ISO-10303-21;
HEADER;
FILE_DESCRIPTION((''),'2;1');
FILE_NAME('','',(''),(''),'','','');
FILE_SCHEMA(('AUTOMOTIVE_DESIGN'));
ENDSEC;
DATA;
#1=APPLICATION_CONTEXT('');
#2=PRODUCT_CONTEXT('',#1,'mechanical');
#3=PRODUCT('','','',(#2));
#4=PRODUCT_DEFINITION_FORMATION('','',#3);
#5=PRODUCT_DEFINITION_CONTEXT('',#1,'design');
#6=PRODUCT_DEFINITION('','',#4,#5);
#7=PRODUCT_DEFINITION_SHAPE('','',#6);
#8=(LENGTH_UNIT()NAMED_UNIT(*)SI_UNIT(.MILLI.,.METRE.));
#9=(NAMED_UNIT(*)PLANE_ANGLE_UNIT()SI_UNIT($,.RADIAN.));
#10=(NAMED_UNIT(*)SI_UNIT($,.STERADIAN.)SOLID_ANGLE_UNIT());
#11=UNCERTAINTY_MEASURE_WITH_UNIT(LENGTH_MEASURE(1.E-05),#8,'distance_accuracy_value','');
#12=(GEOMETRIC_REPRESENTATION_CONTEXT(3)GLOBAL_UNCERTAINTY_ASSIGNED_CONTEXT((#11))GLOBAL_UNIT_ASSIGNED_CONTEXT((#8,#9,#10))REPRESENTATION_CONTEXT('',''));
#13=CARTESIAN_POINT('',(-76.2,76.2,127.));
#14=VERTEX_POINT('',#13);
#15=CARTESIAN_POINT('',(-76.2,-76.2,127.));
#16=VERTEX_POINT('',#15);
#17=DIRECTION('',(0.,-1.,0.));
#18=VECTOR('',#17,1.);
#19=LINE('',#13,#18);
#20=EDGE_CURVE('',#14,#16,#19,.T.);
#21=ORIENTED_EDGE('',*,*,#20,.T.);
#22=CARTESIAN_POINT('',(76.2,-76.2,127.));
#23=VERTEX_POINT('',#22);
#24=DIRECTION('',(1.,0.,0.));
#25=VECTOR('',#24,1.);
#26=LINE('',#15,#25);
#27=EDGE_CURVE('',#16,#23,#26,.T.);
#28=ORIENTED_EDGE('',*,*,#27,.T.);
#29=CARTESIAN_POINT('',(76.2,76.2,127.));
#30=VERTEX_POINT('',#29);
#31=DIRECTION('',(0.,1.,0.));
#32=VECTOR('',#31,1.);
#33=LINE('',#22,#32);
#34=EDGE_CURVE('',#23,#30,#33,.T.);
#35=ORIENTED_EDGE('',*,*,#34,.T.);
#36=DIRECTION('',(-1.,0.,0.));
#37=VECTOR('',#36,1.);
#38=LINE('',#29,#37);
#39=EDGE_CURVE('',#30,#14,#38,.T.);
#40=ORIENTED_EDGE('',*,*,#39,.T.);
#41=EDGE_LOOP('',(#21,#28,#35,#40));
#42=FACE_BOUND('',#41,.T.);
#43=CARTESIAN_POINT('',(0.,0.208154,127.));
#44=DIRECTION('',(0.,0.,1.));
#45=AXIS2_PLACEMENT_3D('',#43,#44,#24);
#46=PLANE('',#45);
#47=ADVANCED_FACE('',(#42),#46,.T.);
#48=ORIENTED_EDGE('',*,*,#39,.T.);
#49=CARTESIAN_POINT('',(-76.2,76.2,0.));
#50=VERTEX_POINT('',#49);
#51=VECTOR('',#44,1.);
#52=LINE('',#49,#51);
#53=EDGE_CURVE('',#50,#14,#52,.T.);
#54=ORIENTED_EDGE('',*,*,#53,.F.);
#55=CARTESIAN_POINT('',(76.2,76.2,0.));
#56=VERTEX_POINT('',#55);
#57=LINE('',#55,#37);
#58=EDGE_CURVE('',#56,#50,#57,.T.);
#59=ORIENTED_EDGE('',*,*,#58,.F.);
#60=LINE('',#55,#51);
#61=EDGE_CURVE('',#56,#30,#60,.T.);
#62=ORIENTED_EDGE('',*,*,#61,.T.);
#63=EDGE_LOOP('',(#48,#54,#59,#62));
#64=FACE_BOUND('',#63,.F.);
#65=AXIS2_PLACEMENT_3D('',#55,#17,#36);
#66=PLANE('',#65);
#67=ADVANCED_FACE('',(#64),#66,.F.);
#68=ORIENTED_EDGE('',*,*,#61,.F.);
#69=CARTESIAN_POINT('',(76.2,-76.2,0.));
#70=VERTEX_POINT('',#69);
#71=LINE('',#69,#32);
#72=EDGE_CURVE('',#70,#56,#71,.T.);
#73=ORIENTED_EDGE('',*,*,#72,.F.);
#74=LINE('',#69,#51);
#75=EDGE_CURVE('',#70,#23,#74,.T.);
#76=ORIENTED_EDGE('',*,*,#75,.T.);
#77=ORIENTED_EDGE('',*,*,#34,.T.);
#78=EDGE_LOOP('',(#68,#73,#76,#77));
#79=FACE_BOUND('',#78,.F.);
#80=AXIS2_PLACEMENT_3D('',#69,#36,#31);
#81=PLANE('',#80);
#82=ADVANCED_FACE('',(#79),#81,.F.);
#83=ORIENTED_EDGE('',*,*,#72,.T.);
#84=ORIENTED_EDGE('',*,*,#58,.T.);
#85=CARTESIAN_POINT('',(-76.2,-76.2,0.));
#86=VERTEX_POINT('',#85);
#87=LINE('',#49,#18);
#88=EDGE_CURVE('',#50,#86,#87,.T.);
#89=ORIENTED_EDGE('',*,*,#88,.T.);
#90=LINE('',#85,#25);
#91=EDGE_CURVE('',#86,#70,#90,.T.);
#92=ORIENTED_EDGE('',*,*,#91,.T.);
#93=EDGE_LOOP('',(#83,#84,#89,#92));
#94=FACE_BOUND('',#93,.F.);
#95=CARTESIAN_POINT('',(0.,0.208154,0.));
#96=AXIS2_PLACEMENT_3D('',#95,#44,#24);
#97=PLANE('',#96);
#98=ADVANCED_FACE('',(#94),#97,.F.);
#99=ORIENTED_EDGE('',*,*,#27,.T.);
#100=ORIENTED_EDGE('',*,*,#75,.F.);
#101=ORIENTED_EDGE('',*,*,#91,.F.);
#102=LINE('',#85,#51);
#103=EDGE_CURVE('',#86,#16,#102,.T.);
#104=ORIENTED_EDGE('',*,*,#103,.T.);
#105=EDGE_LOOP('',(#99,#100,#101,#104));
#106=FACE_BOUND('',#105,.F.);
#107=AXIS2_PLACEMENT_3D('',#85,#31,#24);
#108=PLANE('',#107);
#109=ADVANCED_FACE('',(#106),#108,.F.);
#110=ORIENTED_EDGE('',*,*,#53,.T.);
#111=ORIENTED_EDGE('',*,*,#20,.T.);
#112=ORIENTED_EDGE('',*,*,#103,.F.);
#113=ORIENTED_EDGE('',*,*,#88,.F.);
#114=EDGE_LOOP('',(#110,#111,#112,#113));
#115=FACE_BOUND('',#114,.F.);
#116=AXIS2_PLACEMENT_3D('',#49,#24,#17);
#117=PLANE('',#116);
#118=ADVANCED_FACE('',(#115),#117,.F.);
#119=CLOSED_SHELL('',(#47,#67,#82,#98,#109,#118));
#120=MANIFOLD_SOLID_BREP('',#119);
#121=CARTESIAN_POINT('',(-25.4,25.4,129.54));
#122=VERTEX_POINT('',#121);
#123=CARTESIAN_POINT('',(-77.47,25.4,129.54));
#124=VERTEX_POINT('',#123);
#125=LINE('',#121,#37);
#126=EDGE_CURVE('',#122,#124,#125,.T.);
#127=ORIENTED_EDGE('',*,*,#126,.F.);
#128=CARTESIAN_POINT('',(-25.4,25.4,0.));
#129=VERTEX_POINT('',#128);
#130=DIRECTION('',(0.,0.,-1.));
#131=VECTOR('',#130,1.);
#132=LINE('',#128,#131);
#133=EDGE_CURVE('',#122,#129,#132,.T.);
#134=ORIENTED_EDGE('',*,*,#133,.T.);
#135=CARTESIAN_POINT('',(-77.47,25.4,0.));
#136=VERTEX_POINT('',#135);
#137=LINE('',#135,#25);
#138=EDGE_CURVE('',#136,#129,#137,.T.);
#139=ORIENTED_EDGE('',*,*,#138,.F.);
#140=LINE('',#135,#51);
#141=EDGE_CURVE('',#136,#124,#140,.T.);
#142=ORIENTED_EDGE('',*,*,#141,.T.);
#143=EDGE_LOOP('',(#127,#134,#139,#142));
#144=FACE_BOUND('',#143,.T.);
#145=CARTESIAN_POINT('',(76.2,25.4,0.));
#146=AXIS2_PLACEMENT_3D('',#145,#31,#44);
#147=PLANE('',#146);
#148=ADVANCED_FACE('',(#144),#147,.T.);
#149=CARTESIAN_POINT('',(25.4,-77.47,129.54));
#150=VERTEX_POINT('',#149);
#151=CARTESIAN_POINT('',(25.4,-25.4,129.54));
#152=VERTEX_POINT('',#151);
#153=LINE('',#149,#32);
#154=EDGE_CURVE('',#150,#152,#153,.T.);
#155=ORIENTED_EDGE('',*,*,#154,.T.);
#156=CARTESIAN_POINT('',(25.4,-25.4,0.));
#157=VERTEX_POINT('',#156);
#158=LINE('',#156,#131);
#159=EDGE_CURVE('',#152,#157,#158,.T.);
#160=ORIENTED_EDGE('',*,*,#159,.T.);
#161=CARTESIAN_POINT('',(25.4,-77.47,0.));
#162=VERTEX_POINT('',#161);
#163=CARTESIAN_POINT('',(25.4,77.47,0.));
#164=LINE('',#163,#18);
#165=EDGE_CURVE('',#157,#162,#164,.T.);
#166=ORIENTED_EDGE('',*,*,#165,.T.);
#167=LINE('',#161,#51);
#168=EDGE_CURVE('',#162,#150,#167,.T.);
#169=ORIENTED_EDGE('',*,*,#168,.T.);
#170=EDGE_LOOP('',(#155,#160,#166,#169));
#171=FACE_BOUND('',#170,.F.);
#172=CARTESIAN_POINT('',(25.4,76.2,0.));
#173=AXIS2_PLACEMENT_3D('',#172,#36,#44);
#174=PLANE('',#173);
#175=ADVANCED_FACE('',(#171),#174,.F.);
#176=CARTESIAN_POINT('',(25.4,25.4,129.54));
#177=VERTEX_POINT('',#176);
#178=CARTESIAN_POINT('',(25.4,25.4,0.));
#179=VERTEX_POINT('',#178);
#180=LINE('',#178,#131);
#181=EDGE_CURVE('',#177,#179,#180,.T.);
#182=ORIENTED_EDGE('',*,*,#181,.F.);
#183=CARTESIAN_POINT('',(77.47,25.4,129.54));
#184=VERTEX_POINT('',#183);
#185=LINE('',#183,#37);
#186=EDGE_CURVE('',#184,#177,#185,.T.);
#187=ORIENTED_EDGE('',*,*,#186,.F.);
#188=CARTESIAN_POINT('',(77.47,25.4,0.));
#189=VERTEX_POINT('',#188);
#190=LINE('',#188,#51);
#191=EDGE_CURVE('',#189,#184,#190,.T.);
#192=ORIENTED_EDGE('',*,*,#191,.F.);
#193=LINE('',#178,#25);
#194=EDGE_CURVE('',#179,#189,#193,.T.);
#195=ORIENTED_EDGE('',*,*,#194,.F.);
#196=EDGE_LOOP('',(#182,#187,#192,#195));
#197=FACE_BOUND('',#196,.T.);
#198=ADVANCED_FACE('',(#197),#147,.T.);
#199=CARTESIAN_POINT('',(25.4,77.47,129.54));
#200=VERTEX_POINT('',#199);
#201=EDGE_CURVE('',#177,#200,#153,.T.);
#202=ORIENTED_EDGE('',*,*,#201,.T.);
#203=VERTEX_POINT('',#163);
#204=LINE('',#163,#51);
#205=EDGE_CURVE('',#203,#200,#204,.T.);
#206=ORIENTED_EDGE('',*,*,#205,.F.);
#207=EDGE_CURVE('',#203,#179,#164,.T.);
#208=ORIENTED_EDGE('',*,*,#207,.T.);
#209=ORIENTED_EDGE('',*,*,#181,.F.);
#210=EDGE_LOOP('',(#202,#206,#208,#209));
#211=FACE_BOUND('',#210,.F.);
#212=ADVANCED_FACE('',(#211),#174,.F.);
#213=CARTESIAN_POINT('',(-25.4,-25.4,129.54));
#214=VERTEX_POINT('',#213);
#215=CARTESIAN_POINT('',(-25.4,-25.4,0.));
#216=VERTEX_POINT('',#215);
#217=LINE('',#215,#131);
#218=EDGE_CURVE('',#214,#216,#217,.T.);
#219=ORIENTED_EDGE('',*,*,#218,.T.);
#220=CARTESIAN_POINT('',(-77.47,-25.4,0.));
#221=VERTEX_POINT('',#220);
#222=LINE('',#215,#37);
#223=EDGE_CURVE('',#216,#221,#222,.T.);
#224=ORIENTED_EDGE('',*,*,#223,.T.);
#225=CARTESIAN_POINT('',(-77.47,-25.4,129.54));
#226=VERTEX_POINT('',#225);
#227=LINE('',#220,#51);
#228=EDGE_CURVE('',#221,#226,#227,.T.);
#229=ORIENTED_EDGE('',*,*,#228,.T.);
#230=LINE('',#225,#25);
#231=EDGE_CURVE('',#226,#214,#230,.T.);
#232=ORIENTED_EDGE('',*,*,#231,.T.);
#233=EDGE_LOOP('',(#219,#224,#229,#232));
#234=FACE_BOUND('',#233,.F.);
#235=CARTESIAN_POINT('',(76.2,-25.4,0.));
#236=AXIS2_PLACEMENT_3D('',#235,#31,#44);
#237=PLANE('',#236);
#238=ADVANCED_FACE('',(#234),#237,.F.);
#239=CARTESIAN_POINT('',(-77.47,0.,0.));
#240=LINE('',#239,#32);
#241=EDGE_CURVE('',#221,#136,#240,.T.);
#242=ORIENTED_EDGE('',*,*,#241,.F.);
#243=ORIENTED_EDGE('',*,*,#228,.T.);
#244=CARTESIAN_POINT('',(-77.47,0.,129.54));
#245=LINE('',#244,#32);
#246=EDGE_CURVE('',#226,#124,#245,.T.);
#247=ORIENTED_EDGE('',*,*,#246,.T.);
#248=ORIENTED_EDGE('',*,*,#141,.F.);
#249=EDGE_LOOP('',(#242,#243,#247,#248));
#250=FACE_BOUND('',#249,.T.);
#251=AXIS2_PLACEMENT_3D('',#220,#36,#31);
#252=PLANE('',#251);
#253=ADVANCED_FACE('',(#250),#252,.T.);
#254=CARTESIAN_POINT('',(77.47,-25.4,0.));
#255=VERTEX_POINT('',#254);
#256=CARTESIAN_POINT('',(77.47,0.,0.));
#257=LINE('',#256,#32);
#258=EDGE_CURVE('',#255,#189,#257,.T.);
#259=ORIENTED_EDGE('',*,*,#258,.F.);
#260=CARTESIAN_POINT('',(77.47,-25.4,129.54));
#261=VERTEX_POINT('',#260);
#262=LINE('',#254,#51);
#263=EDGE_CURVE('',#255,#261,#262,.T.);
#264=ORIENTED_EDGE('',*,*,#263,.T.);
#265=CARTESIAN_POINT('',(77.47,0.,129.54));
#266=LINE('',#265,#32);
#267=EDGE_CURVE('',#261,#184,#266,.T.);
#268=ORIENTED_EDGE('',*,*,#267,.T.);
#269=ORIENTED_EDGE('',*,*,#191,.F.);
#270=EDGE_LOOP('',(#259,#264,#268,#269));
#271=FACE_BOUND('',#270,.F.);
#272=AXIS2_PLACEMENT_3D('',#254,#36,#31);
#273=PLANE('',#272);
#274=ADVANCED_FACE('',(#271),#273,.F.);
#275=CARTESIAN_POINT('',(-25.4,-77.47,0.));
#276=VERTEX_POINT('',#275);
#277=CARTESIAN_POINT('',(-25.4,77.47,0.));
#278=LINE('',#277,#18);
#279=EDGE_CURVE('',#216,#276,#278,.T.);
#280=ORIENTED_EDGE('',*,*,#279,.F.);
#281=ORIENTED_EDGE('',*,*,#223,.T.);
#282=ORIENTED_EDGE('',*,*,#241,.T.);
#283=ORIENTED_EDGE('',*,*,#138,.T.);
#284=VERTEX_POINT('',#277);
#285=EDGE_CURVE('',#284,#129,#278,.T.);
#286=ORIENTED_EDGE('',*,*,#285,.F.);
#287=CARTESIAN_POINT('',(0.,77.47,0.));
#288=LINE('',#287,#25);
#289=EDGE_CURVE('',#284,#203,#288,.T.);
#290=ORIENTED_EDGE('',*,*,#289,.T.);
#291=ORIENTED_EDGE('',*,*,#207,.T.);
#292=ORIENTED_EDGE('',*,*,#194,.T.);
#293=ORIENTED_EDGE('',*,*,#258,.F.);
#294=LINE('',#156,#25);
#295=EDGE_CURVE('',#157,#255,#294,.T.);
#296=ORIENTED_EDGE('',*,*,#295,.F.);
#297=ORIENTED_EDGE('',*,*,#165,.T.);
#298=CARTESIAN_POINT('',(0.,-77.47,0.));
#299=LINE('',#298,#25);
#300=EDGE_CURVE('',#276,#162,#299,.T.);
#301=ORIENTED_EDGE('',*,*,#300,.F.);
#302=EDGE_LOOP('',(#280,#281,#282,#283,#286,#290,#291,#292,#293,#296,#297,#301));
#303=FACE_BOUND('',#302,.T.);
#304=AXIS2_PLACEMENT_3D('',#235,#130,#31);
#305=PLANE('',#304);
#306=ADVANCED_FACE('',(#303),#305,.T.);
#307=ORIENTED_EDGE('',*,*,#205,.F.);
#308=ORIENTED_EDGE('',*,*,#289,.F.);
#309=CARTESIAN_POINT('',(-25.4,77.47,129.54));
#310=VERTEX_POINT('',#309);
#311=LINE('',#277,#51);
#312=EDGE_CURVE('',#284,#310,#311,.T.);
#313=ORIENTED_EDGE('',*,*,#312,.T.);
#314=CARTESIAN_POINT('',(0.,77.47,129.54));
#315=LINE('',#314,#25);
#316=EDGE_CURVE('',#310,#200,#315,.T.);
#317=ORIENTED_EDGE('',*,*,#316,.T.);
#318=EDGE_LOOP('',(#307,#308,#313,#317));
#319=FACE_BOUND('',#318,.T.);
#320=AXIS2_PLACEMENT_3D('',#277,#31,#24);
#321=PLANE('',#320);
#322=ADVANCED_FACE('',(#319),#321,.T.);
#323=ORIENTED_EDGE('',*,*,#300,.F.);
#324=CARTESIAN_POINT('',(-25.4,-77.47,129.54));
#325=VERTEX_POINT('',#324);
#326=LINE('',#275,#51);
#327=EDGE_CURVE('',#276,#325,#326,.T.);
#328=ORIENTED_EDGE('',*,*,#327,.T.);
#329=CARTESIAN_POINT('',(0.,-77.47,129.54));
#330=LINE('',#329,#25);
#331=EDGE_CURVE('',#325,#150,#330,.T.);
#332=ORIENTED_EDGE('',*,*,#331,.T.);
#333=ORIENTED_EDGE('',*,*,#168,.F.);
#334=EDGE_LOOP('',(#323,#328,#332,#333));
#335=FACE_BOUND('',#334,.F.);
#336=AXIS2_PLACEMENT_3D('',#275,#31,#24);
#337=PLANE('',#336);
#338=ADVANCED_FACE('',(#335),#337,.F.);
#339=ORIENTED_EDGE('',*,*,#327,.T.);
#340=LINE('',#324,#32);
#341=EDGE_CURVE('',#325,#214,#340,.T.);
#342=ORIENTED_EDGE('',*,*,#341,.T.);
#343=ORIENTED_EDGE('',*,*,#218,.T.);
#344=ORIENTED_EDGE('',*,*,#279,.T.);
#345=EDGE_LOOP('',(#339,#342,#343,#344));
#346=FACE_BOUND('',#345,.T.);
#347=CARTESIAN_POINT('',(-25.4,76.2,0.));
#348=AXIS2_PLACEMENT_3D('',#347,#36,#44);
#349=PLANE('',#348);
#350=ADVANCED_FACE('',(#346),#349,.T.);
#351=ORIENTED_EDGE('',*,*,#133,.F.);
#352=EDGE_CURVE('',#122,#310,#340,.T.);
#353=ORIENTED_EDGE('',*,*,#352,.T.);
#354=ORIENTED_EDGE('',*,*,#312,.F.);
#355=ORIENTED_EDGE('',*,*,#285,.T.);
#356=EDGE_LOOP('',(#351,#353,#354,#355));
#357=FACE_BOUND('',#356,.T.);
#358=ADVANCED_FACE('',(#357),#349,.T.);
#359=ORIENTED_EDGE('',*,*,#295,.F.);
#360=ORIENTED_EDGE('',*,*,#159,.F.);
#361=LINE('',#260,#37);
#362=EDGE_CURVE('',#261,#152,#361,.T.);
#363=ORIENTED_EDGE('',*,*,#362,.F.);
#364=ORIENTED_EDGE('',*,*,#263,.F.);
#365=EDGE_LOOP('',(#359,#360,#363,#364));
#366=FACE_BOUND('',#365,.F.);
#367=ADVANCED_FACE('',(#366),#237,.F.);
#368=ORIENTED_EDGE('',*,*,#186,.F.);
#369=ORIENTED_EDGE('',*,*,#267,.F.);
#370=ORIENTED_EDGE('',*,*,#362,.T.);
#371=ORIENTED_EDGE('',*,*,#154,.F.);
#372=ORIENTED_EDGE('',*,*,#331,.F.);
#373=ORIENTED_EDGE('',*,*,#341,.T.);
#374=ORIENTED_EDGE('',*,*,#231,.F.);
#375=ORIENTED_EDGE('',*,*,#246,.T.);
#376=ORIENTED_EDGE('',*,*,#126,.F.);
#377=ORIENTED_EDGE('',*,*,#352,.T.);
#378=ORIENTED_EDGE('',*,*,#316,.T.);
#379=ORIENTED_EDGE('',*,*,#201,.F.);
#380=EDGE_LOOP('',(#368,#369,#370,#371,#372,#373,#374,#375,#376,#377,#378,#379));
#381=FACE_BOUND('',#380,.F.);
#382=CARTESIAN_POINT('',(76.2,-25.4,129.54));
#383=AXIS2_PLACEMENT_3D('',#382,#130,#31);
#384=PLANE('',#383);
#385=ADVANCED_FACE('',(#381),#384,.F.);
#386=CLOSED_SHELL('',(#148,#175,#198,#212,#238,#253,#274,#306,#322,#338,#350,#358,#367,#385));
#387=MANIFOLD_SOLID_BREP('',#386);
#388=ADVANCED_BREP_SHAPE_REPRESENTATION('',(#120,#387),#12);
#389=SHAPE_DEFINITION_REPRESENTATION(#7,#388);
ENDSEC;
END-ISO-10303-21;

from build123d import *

# Parameters (mm, degrees)
F0_W     = 50.8
F0_H     = 1.27
F1_DEPTH = 127
F0_W_2   = 1.27
F0_H_2   = 50.8
F2_DEPTH = 129.54
F3_DEPTH = 152.4
F4_DEPTH = 152.4


with BuildPart() as f1:
    # F0 (on Top) → F1 (new body)
    with BuildSketch(Plane.XY):
        Polygon((-25.4, 76.2), (-76.2, 76.2), (-76.2, 25.4), (-76.2, -25.4), (-76.2, -76.2), (-25.4, -76.2), (25.4, -76.2), (76.2, -76.2), (76.2, -25.4), (76.2, 25.4), (76.2, 76.2), (25.4, 76.2), (25.4, 74.93), (-25.4, 74.93), align=None)
        with Locations((0, 75.565)):
            Rectangle(F0_W, F0_H)
    extrude(amount=F1_DEPTH)


with BuildPart() as f2:
    # F0 (on Top) → F2 (new body)
    with BuildSketch(Plane.XY):
        with Locations((76.835, 0)):
            Rectangle(F0_W_2, F0_H_2)
    extrude(amount=F2_DEPTH)

    # F4 (add): a face of the model
    f4_faces = [f2.faces().sort_by_distance(p)[0] for p in [
        (76.2, 0, 64.77),
    ]]


with BuildPart() as f2b:
    # F0 (on Top) → F2, piece 2 (new body)
    with BuildSketch(Plane.XY):
        with Locations((0, 76.835)):
            Rectangle(F0_W, F0_H)
    extrude(amount=F2_DEPTH)

    # F3 (add): a face of the model
    f3_faces = [f2b.faces().sort_by_distance(p)[0] for p in [
        (0, 76.2, 64.77),
    ]]


with BuildPart() as f2c:
    # F0 (on Top) → F2, piece 3 (new body)
    with BuildSketch(Plane.XY):
        with Locations((0, -76.835)):
            Rectangle(F0_W, F0_H)
    extrude(amount=F2_DEPTH)


with BuildPart() as f2d:
    # F0 (on Top) → F2, piece 4 (new body)
    with BuildSketch(Plane.XY):
        with Locations((-76.835, 0)):
            Rectangle(F0_W_2, F0_H_2)
    extrude(amount=F2_DEPTH)


with BuildPart() as f2b_1:
    add(f2b.part)

    add(f2c.part)  # F3 merges F2c
    extrude(f3_faces, amount=F3_DEPTH)


with BuildPart() as f2_1:
    add(f2.part)

    add(f2b_1.part)  # F4 merges F2b

    add(f2d.part)  # F4 merges F2d
    extrude(f4_faces, amount=F4_DEPTH)


solid = Compound([f1.part, f2_1.part])
